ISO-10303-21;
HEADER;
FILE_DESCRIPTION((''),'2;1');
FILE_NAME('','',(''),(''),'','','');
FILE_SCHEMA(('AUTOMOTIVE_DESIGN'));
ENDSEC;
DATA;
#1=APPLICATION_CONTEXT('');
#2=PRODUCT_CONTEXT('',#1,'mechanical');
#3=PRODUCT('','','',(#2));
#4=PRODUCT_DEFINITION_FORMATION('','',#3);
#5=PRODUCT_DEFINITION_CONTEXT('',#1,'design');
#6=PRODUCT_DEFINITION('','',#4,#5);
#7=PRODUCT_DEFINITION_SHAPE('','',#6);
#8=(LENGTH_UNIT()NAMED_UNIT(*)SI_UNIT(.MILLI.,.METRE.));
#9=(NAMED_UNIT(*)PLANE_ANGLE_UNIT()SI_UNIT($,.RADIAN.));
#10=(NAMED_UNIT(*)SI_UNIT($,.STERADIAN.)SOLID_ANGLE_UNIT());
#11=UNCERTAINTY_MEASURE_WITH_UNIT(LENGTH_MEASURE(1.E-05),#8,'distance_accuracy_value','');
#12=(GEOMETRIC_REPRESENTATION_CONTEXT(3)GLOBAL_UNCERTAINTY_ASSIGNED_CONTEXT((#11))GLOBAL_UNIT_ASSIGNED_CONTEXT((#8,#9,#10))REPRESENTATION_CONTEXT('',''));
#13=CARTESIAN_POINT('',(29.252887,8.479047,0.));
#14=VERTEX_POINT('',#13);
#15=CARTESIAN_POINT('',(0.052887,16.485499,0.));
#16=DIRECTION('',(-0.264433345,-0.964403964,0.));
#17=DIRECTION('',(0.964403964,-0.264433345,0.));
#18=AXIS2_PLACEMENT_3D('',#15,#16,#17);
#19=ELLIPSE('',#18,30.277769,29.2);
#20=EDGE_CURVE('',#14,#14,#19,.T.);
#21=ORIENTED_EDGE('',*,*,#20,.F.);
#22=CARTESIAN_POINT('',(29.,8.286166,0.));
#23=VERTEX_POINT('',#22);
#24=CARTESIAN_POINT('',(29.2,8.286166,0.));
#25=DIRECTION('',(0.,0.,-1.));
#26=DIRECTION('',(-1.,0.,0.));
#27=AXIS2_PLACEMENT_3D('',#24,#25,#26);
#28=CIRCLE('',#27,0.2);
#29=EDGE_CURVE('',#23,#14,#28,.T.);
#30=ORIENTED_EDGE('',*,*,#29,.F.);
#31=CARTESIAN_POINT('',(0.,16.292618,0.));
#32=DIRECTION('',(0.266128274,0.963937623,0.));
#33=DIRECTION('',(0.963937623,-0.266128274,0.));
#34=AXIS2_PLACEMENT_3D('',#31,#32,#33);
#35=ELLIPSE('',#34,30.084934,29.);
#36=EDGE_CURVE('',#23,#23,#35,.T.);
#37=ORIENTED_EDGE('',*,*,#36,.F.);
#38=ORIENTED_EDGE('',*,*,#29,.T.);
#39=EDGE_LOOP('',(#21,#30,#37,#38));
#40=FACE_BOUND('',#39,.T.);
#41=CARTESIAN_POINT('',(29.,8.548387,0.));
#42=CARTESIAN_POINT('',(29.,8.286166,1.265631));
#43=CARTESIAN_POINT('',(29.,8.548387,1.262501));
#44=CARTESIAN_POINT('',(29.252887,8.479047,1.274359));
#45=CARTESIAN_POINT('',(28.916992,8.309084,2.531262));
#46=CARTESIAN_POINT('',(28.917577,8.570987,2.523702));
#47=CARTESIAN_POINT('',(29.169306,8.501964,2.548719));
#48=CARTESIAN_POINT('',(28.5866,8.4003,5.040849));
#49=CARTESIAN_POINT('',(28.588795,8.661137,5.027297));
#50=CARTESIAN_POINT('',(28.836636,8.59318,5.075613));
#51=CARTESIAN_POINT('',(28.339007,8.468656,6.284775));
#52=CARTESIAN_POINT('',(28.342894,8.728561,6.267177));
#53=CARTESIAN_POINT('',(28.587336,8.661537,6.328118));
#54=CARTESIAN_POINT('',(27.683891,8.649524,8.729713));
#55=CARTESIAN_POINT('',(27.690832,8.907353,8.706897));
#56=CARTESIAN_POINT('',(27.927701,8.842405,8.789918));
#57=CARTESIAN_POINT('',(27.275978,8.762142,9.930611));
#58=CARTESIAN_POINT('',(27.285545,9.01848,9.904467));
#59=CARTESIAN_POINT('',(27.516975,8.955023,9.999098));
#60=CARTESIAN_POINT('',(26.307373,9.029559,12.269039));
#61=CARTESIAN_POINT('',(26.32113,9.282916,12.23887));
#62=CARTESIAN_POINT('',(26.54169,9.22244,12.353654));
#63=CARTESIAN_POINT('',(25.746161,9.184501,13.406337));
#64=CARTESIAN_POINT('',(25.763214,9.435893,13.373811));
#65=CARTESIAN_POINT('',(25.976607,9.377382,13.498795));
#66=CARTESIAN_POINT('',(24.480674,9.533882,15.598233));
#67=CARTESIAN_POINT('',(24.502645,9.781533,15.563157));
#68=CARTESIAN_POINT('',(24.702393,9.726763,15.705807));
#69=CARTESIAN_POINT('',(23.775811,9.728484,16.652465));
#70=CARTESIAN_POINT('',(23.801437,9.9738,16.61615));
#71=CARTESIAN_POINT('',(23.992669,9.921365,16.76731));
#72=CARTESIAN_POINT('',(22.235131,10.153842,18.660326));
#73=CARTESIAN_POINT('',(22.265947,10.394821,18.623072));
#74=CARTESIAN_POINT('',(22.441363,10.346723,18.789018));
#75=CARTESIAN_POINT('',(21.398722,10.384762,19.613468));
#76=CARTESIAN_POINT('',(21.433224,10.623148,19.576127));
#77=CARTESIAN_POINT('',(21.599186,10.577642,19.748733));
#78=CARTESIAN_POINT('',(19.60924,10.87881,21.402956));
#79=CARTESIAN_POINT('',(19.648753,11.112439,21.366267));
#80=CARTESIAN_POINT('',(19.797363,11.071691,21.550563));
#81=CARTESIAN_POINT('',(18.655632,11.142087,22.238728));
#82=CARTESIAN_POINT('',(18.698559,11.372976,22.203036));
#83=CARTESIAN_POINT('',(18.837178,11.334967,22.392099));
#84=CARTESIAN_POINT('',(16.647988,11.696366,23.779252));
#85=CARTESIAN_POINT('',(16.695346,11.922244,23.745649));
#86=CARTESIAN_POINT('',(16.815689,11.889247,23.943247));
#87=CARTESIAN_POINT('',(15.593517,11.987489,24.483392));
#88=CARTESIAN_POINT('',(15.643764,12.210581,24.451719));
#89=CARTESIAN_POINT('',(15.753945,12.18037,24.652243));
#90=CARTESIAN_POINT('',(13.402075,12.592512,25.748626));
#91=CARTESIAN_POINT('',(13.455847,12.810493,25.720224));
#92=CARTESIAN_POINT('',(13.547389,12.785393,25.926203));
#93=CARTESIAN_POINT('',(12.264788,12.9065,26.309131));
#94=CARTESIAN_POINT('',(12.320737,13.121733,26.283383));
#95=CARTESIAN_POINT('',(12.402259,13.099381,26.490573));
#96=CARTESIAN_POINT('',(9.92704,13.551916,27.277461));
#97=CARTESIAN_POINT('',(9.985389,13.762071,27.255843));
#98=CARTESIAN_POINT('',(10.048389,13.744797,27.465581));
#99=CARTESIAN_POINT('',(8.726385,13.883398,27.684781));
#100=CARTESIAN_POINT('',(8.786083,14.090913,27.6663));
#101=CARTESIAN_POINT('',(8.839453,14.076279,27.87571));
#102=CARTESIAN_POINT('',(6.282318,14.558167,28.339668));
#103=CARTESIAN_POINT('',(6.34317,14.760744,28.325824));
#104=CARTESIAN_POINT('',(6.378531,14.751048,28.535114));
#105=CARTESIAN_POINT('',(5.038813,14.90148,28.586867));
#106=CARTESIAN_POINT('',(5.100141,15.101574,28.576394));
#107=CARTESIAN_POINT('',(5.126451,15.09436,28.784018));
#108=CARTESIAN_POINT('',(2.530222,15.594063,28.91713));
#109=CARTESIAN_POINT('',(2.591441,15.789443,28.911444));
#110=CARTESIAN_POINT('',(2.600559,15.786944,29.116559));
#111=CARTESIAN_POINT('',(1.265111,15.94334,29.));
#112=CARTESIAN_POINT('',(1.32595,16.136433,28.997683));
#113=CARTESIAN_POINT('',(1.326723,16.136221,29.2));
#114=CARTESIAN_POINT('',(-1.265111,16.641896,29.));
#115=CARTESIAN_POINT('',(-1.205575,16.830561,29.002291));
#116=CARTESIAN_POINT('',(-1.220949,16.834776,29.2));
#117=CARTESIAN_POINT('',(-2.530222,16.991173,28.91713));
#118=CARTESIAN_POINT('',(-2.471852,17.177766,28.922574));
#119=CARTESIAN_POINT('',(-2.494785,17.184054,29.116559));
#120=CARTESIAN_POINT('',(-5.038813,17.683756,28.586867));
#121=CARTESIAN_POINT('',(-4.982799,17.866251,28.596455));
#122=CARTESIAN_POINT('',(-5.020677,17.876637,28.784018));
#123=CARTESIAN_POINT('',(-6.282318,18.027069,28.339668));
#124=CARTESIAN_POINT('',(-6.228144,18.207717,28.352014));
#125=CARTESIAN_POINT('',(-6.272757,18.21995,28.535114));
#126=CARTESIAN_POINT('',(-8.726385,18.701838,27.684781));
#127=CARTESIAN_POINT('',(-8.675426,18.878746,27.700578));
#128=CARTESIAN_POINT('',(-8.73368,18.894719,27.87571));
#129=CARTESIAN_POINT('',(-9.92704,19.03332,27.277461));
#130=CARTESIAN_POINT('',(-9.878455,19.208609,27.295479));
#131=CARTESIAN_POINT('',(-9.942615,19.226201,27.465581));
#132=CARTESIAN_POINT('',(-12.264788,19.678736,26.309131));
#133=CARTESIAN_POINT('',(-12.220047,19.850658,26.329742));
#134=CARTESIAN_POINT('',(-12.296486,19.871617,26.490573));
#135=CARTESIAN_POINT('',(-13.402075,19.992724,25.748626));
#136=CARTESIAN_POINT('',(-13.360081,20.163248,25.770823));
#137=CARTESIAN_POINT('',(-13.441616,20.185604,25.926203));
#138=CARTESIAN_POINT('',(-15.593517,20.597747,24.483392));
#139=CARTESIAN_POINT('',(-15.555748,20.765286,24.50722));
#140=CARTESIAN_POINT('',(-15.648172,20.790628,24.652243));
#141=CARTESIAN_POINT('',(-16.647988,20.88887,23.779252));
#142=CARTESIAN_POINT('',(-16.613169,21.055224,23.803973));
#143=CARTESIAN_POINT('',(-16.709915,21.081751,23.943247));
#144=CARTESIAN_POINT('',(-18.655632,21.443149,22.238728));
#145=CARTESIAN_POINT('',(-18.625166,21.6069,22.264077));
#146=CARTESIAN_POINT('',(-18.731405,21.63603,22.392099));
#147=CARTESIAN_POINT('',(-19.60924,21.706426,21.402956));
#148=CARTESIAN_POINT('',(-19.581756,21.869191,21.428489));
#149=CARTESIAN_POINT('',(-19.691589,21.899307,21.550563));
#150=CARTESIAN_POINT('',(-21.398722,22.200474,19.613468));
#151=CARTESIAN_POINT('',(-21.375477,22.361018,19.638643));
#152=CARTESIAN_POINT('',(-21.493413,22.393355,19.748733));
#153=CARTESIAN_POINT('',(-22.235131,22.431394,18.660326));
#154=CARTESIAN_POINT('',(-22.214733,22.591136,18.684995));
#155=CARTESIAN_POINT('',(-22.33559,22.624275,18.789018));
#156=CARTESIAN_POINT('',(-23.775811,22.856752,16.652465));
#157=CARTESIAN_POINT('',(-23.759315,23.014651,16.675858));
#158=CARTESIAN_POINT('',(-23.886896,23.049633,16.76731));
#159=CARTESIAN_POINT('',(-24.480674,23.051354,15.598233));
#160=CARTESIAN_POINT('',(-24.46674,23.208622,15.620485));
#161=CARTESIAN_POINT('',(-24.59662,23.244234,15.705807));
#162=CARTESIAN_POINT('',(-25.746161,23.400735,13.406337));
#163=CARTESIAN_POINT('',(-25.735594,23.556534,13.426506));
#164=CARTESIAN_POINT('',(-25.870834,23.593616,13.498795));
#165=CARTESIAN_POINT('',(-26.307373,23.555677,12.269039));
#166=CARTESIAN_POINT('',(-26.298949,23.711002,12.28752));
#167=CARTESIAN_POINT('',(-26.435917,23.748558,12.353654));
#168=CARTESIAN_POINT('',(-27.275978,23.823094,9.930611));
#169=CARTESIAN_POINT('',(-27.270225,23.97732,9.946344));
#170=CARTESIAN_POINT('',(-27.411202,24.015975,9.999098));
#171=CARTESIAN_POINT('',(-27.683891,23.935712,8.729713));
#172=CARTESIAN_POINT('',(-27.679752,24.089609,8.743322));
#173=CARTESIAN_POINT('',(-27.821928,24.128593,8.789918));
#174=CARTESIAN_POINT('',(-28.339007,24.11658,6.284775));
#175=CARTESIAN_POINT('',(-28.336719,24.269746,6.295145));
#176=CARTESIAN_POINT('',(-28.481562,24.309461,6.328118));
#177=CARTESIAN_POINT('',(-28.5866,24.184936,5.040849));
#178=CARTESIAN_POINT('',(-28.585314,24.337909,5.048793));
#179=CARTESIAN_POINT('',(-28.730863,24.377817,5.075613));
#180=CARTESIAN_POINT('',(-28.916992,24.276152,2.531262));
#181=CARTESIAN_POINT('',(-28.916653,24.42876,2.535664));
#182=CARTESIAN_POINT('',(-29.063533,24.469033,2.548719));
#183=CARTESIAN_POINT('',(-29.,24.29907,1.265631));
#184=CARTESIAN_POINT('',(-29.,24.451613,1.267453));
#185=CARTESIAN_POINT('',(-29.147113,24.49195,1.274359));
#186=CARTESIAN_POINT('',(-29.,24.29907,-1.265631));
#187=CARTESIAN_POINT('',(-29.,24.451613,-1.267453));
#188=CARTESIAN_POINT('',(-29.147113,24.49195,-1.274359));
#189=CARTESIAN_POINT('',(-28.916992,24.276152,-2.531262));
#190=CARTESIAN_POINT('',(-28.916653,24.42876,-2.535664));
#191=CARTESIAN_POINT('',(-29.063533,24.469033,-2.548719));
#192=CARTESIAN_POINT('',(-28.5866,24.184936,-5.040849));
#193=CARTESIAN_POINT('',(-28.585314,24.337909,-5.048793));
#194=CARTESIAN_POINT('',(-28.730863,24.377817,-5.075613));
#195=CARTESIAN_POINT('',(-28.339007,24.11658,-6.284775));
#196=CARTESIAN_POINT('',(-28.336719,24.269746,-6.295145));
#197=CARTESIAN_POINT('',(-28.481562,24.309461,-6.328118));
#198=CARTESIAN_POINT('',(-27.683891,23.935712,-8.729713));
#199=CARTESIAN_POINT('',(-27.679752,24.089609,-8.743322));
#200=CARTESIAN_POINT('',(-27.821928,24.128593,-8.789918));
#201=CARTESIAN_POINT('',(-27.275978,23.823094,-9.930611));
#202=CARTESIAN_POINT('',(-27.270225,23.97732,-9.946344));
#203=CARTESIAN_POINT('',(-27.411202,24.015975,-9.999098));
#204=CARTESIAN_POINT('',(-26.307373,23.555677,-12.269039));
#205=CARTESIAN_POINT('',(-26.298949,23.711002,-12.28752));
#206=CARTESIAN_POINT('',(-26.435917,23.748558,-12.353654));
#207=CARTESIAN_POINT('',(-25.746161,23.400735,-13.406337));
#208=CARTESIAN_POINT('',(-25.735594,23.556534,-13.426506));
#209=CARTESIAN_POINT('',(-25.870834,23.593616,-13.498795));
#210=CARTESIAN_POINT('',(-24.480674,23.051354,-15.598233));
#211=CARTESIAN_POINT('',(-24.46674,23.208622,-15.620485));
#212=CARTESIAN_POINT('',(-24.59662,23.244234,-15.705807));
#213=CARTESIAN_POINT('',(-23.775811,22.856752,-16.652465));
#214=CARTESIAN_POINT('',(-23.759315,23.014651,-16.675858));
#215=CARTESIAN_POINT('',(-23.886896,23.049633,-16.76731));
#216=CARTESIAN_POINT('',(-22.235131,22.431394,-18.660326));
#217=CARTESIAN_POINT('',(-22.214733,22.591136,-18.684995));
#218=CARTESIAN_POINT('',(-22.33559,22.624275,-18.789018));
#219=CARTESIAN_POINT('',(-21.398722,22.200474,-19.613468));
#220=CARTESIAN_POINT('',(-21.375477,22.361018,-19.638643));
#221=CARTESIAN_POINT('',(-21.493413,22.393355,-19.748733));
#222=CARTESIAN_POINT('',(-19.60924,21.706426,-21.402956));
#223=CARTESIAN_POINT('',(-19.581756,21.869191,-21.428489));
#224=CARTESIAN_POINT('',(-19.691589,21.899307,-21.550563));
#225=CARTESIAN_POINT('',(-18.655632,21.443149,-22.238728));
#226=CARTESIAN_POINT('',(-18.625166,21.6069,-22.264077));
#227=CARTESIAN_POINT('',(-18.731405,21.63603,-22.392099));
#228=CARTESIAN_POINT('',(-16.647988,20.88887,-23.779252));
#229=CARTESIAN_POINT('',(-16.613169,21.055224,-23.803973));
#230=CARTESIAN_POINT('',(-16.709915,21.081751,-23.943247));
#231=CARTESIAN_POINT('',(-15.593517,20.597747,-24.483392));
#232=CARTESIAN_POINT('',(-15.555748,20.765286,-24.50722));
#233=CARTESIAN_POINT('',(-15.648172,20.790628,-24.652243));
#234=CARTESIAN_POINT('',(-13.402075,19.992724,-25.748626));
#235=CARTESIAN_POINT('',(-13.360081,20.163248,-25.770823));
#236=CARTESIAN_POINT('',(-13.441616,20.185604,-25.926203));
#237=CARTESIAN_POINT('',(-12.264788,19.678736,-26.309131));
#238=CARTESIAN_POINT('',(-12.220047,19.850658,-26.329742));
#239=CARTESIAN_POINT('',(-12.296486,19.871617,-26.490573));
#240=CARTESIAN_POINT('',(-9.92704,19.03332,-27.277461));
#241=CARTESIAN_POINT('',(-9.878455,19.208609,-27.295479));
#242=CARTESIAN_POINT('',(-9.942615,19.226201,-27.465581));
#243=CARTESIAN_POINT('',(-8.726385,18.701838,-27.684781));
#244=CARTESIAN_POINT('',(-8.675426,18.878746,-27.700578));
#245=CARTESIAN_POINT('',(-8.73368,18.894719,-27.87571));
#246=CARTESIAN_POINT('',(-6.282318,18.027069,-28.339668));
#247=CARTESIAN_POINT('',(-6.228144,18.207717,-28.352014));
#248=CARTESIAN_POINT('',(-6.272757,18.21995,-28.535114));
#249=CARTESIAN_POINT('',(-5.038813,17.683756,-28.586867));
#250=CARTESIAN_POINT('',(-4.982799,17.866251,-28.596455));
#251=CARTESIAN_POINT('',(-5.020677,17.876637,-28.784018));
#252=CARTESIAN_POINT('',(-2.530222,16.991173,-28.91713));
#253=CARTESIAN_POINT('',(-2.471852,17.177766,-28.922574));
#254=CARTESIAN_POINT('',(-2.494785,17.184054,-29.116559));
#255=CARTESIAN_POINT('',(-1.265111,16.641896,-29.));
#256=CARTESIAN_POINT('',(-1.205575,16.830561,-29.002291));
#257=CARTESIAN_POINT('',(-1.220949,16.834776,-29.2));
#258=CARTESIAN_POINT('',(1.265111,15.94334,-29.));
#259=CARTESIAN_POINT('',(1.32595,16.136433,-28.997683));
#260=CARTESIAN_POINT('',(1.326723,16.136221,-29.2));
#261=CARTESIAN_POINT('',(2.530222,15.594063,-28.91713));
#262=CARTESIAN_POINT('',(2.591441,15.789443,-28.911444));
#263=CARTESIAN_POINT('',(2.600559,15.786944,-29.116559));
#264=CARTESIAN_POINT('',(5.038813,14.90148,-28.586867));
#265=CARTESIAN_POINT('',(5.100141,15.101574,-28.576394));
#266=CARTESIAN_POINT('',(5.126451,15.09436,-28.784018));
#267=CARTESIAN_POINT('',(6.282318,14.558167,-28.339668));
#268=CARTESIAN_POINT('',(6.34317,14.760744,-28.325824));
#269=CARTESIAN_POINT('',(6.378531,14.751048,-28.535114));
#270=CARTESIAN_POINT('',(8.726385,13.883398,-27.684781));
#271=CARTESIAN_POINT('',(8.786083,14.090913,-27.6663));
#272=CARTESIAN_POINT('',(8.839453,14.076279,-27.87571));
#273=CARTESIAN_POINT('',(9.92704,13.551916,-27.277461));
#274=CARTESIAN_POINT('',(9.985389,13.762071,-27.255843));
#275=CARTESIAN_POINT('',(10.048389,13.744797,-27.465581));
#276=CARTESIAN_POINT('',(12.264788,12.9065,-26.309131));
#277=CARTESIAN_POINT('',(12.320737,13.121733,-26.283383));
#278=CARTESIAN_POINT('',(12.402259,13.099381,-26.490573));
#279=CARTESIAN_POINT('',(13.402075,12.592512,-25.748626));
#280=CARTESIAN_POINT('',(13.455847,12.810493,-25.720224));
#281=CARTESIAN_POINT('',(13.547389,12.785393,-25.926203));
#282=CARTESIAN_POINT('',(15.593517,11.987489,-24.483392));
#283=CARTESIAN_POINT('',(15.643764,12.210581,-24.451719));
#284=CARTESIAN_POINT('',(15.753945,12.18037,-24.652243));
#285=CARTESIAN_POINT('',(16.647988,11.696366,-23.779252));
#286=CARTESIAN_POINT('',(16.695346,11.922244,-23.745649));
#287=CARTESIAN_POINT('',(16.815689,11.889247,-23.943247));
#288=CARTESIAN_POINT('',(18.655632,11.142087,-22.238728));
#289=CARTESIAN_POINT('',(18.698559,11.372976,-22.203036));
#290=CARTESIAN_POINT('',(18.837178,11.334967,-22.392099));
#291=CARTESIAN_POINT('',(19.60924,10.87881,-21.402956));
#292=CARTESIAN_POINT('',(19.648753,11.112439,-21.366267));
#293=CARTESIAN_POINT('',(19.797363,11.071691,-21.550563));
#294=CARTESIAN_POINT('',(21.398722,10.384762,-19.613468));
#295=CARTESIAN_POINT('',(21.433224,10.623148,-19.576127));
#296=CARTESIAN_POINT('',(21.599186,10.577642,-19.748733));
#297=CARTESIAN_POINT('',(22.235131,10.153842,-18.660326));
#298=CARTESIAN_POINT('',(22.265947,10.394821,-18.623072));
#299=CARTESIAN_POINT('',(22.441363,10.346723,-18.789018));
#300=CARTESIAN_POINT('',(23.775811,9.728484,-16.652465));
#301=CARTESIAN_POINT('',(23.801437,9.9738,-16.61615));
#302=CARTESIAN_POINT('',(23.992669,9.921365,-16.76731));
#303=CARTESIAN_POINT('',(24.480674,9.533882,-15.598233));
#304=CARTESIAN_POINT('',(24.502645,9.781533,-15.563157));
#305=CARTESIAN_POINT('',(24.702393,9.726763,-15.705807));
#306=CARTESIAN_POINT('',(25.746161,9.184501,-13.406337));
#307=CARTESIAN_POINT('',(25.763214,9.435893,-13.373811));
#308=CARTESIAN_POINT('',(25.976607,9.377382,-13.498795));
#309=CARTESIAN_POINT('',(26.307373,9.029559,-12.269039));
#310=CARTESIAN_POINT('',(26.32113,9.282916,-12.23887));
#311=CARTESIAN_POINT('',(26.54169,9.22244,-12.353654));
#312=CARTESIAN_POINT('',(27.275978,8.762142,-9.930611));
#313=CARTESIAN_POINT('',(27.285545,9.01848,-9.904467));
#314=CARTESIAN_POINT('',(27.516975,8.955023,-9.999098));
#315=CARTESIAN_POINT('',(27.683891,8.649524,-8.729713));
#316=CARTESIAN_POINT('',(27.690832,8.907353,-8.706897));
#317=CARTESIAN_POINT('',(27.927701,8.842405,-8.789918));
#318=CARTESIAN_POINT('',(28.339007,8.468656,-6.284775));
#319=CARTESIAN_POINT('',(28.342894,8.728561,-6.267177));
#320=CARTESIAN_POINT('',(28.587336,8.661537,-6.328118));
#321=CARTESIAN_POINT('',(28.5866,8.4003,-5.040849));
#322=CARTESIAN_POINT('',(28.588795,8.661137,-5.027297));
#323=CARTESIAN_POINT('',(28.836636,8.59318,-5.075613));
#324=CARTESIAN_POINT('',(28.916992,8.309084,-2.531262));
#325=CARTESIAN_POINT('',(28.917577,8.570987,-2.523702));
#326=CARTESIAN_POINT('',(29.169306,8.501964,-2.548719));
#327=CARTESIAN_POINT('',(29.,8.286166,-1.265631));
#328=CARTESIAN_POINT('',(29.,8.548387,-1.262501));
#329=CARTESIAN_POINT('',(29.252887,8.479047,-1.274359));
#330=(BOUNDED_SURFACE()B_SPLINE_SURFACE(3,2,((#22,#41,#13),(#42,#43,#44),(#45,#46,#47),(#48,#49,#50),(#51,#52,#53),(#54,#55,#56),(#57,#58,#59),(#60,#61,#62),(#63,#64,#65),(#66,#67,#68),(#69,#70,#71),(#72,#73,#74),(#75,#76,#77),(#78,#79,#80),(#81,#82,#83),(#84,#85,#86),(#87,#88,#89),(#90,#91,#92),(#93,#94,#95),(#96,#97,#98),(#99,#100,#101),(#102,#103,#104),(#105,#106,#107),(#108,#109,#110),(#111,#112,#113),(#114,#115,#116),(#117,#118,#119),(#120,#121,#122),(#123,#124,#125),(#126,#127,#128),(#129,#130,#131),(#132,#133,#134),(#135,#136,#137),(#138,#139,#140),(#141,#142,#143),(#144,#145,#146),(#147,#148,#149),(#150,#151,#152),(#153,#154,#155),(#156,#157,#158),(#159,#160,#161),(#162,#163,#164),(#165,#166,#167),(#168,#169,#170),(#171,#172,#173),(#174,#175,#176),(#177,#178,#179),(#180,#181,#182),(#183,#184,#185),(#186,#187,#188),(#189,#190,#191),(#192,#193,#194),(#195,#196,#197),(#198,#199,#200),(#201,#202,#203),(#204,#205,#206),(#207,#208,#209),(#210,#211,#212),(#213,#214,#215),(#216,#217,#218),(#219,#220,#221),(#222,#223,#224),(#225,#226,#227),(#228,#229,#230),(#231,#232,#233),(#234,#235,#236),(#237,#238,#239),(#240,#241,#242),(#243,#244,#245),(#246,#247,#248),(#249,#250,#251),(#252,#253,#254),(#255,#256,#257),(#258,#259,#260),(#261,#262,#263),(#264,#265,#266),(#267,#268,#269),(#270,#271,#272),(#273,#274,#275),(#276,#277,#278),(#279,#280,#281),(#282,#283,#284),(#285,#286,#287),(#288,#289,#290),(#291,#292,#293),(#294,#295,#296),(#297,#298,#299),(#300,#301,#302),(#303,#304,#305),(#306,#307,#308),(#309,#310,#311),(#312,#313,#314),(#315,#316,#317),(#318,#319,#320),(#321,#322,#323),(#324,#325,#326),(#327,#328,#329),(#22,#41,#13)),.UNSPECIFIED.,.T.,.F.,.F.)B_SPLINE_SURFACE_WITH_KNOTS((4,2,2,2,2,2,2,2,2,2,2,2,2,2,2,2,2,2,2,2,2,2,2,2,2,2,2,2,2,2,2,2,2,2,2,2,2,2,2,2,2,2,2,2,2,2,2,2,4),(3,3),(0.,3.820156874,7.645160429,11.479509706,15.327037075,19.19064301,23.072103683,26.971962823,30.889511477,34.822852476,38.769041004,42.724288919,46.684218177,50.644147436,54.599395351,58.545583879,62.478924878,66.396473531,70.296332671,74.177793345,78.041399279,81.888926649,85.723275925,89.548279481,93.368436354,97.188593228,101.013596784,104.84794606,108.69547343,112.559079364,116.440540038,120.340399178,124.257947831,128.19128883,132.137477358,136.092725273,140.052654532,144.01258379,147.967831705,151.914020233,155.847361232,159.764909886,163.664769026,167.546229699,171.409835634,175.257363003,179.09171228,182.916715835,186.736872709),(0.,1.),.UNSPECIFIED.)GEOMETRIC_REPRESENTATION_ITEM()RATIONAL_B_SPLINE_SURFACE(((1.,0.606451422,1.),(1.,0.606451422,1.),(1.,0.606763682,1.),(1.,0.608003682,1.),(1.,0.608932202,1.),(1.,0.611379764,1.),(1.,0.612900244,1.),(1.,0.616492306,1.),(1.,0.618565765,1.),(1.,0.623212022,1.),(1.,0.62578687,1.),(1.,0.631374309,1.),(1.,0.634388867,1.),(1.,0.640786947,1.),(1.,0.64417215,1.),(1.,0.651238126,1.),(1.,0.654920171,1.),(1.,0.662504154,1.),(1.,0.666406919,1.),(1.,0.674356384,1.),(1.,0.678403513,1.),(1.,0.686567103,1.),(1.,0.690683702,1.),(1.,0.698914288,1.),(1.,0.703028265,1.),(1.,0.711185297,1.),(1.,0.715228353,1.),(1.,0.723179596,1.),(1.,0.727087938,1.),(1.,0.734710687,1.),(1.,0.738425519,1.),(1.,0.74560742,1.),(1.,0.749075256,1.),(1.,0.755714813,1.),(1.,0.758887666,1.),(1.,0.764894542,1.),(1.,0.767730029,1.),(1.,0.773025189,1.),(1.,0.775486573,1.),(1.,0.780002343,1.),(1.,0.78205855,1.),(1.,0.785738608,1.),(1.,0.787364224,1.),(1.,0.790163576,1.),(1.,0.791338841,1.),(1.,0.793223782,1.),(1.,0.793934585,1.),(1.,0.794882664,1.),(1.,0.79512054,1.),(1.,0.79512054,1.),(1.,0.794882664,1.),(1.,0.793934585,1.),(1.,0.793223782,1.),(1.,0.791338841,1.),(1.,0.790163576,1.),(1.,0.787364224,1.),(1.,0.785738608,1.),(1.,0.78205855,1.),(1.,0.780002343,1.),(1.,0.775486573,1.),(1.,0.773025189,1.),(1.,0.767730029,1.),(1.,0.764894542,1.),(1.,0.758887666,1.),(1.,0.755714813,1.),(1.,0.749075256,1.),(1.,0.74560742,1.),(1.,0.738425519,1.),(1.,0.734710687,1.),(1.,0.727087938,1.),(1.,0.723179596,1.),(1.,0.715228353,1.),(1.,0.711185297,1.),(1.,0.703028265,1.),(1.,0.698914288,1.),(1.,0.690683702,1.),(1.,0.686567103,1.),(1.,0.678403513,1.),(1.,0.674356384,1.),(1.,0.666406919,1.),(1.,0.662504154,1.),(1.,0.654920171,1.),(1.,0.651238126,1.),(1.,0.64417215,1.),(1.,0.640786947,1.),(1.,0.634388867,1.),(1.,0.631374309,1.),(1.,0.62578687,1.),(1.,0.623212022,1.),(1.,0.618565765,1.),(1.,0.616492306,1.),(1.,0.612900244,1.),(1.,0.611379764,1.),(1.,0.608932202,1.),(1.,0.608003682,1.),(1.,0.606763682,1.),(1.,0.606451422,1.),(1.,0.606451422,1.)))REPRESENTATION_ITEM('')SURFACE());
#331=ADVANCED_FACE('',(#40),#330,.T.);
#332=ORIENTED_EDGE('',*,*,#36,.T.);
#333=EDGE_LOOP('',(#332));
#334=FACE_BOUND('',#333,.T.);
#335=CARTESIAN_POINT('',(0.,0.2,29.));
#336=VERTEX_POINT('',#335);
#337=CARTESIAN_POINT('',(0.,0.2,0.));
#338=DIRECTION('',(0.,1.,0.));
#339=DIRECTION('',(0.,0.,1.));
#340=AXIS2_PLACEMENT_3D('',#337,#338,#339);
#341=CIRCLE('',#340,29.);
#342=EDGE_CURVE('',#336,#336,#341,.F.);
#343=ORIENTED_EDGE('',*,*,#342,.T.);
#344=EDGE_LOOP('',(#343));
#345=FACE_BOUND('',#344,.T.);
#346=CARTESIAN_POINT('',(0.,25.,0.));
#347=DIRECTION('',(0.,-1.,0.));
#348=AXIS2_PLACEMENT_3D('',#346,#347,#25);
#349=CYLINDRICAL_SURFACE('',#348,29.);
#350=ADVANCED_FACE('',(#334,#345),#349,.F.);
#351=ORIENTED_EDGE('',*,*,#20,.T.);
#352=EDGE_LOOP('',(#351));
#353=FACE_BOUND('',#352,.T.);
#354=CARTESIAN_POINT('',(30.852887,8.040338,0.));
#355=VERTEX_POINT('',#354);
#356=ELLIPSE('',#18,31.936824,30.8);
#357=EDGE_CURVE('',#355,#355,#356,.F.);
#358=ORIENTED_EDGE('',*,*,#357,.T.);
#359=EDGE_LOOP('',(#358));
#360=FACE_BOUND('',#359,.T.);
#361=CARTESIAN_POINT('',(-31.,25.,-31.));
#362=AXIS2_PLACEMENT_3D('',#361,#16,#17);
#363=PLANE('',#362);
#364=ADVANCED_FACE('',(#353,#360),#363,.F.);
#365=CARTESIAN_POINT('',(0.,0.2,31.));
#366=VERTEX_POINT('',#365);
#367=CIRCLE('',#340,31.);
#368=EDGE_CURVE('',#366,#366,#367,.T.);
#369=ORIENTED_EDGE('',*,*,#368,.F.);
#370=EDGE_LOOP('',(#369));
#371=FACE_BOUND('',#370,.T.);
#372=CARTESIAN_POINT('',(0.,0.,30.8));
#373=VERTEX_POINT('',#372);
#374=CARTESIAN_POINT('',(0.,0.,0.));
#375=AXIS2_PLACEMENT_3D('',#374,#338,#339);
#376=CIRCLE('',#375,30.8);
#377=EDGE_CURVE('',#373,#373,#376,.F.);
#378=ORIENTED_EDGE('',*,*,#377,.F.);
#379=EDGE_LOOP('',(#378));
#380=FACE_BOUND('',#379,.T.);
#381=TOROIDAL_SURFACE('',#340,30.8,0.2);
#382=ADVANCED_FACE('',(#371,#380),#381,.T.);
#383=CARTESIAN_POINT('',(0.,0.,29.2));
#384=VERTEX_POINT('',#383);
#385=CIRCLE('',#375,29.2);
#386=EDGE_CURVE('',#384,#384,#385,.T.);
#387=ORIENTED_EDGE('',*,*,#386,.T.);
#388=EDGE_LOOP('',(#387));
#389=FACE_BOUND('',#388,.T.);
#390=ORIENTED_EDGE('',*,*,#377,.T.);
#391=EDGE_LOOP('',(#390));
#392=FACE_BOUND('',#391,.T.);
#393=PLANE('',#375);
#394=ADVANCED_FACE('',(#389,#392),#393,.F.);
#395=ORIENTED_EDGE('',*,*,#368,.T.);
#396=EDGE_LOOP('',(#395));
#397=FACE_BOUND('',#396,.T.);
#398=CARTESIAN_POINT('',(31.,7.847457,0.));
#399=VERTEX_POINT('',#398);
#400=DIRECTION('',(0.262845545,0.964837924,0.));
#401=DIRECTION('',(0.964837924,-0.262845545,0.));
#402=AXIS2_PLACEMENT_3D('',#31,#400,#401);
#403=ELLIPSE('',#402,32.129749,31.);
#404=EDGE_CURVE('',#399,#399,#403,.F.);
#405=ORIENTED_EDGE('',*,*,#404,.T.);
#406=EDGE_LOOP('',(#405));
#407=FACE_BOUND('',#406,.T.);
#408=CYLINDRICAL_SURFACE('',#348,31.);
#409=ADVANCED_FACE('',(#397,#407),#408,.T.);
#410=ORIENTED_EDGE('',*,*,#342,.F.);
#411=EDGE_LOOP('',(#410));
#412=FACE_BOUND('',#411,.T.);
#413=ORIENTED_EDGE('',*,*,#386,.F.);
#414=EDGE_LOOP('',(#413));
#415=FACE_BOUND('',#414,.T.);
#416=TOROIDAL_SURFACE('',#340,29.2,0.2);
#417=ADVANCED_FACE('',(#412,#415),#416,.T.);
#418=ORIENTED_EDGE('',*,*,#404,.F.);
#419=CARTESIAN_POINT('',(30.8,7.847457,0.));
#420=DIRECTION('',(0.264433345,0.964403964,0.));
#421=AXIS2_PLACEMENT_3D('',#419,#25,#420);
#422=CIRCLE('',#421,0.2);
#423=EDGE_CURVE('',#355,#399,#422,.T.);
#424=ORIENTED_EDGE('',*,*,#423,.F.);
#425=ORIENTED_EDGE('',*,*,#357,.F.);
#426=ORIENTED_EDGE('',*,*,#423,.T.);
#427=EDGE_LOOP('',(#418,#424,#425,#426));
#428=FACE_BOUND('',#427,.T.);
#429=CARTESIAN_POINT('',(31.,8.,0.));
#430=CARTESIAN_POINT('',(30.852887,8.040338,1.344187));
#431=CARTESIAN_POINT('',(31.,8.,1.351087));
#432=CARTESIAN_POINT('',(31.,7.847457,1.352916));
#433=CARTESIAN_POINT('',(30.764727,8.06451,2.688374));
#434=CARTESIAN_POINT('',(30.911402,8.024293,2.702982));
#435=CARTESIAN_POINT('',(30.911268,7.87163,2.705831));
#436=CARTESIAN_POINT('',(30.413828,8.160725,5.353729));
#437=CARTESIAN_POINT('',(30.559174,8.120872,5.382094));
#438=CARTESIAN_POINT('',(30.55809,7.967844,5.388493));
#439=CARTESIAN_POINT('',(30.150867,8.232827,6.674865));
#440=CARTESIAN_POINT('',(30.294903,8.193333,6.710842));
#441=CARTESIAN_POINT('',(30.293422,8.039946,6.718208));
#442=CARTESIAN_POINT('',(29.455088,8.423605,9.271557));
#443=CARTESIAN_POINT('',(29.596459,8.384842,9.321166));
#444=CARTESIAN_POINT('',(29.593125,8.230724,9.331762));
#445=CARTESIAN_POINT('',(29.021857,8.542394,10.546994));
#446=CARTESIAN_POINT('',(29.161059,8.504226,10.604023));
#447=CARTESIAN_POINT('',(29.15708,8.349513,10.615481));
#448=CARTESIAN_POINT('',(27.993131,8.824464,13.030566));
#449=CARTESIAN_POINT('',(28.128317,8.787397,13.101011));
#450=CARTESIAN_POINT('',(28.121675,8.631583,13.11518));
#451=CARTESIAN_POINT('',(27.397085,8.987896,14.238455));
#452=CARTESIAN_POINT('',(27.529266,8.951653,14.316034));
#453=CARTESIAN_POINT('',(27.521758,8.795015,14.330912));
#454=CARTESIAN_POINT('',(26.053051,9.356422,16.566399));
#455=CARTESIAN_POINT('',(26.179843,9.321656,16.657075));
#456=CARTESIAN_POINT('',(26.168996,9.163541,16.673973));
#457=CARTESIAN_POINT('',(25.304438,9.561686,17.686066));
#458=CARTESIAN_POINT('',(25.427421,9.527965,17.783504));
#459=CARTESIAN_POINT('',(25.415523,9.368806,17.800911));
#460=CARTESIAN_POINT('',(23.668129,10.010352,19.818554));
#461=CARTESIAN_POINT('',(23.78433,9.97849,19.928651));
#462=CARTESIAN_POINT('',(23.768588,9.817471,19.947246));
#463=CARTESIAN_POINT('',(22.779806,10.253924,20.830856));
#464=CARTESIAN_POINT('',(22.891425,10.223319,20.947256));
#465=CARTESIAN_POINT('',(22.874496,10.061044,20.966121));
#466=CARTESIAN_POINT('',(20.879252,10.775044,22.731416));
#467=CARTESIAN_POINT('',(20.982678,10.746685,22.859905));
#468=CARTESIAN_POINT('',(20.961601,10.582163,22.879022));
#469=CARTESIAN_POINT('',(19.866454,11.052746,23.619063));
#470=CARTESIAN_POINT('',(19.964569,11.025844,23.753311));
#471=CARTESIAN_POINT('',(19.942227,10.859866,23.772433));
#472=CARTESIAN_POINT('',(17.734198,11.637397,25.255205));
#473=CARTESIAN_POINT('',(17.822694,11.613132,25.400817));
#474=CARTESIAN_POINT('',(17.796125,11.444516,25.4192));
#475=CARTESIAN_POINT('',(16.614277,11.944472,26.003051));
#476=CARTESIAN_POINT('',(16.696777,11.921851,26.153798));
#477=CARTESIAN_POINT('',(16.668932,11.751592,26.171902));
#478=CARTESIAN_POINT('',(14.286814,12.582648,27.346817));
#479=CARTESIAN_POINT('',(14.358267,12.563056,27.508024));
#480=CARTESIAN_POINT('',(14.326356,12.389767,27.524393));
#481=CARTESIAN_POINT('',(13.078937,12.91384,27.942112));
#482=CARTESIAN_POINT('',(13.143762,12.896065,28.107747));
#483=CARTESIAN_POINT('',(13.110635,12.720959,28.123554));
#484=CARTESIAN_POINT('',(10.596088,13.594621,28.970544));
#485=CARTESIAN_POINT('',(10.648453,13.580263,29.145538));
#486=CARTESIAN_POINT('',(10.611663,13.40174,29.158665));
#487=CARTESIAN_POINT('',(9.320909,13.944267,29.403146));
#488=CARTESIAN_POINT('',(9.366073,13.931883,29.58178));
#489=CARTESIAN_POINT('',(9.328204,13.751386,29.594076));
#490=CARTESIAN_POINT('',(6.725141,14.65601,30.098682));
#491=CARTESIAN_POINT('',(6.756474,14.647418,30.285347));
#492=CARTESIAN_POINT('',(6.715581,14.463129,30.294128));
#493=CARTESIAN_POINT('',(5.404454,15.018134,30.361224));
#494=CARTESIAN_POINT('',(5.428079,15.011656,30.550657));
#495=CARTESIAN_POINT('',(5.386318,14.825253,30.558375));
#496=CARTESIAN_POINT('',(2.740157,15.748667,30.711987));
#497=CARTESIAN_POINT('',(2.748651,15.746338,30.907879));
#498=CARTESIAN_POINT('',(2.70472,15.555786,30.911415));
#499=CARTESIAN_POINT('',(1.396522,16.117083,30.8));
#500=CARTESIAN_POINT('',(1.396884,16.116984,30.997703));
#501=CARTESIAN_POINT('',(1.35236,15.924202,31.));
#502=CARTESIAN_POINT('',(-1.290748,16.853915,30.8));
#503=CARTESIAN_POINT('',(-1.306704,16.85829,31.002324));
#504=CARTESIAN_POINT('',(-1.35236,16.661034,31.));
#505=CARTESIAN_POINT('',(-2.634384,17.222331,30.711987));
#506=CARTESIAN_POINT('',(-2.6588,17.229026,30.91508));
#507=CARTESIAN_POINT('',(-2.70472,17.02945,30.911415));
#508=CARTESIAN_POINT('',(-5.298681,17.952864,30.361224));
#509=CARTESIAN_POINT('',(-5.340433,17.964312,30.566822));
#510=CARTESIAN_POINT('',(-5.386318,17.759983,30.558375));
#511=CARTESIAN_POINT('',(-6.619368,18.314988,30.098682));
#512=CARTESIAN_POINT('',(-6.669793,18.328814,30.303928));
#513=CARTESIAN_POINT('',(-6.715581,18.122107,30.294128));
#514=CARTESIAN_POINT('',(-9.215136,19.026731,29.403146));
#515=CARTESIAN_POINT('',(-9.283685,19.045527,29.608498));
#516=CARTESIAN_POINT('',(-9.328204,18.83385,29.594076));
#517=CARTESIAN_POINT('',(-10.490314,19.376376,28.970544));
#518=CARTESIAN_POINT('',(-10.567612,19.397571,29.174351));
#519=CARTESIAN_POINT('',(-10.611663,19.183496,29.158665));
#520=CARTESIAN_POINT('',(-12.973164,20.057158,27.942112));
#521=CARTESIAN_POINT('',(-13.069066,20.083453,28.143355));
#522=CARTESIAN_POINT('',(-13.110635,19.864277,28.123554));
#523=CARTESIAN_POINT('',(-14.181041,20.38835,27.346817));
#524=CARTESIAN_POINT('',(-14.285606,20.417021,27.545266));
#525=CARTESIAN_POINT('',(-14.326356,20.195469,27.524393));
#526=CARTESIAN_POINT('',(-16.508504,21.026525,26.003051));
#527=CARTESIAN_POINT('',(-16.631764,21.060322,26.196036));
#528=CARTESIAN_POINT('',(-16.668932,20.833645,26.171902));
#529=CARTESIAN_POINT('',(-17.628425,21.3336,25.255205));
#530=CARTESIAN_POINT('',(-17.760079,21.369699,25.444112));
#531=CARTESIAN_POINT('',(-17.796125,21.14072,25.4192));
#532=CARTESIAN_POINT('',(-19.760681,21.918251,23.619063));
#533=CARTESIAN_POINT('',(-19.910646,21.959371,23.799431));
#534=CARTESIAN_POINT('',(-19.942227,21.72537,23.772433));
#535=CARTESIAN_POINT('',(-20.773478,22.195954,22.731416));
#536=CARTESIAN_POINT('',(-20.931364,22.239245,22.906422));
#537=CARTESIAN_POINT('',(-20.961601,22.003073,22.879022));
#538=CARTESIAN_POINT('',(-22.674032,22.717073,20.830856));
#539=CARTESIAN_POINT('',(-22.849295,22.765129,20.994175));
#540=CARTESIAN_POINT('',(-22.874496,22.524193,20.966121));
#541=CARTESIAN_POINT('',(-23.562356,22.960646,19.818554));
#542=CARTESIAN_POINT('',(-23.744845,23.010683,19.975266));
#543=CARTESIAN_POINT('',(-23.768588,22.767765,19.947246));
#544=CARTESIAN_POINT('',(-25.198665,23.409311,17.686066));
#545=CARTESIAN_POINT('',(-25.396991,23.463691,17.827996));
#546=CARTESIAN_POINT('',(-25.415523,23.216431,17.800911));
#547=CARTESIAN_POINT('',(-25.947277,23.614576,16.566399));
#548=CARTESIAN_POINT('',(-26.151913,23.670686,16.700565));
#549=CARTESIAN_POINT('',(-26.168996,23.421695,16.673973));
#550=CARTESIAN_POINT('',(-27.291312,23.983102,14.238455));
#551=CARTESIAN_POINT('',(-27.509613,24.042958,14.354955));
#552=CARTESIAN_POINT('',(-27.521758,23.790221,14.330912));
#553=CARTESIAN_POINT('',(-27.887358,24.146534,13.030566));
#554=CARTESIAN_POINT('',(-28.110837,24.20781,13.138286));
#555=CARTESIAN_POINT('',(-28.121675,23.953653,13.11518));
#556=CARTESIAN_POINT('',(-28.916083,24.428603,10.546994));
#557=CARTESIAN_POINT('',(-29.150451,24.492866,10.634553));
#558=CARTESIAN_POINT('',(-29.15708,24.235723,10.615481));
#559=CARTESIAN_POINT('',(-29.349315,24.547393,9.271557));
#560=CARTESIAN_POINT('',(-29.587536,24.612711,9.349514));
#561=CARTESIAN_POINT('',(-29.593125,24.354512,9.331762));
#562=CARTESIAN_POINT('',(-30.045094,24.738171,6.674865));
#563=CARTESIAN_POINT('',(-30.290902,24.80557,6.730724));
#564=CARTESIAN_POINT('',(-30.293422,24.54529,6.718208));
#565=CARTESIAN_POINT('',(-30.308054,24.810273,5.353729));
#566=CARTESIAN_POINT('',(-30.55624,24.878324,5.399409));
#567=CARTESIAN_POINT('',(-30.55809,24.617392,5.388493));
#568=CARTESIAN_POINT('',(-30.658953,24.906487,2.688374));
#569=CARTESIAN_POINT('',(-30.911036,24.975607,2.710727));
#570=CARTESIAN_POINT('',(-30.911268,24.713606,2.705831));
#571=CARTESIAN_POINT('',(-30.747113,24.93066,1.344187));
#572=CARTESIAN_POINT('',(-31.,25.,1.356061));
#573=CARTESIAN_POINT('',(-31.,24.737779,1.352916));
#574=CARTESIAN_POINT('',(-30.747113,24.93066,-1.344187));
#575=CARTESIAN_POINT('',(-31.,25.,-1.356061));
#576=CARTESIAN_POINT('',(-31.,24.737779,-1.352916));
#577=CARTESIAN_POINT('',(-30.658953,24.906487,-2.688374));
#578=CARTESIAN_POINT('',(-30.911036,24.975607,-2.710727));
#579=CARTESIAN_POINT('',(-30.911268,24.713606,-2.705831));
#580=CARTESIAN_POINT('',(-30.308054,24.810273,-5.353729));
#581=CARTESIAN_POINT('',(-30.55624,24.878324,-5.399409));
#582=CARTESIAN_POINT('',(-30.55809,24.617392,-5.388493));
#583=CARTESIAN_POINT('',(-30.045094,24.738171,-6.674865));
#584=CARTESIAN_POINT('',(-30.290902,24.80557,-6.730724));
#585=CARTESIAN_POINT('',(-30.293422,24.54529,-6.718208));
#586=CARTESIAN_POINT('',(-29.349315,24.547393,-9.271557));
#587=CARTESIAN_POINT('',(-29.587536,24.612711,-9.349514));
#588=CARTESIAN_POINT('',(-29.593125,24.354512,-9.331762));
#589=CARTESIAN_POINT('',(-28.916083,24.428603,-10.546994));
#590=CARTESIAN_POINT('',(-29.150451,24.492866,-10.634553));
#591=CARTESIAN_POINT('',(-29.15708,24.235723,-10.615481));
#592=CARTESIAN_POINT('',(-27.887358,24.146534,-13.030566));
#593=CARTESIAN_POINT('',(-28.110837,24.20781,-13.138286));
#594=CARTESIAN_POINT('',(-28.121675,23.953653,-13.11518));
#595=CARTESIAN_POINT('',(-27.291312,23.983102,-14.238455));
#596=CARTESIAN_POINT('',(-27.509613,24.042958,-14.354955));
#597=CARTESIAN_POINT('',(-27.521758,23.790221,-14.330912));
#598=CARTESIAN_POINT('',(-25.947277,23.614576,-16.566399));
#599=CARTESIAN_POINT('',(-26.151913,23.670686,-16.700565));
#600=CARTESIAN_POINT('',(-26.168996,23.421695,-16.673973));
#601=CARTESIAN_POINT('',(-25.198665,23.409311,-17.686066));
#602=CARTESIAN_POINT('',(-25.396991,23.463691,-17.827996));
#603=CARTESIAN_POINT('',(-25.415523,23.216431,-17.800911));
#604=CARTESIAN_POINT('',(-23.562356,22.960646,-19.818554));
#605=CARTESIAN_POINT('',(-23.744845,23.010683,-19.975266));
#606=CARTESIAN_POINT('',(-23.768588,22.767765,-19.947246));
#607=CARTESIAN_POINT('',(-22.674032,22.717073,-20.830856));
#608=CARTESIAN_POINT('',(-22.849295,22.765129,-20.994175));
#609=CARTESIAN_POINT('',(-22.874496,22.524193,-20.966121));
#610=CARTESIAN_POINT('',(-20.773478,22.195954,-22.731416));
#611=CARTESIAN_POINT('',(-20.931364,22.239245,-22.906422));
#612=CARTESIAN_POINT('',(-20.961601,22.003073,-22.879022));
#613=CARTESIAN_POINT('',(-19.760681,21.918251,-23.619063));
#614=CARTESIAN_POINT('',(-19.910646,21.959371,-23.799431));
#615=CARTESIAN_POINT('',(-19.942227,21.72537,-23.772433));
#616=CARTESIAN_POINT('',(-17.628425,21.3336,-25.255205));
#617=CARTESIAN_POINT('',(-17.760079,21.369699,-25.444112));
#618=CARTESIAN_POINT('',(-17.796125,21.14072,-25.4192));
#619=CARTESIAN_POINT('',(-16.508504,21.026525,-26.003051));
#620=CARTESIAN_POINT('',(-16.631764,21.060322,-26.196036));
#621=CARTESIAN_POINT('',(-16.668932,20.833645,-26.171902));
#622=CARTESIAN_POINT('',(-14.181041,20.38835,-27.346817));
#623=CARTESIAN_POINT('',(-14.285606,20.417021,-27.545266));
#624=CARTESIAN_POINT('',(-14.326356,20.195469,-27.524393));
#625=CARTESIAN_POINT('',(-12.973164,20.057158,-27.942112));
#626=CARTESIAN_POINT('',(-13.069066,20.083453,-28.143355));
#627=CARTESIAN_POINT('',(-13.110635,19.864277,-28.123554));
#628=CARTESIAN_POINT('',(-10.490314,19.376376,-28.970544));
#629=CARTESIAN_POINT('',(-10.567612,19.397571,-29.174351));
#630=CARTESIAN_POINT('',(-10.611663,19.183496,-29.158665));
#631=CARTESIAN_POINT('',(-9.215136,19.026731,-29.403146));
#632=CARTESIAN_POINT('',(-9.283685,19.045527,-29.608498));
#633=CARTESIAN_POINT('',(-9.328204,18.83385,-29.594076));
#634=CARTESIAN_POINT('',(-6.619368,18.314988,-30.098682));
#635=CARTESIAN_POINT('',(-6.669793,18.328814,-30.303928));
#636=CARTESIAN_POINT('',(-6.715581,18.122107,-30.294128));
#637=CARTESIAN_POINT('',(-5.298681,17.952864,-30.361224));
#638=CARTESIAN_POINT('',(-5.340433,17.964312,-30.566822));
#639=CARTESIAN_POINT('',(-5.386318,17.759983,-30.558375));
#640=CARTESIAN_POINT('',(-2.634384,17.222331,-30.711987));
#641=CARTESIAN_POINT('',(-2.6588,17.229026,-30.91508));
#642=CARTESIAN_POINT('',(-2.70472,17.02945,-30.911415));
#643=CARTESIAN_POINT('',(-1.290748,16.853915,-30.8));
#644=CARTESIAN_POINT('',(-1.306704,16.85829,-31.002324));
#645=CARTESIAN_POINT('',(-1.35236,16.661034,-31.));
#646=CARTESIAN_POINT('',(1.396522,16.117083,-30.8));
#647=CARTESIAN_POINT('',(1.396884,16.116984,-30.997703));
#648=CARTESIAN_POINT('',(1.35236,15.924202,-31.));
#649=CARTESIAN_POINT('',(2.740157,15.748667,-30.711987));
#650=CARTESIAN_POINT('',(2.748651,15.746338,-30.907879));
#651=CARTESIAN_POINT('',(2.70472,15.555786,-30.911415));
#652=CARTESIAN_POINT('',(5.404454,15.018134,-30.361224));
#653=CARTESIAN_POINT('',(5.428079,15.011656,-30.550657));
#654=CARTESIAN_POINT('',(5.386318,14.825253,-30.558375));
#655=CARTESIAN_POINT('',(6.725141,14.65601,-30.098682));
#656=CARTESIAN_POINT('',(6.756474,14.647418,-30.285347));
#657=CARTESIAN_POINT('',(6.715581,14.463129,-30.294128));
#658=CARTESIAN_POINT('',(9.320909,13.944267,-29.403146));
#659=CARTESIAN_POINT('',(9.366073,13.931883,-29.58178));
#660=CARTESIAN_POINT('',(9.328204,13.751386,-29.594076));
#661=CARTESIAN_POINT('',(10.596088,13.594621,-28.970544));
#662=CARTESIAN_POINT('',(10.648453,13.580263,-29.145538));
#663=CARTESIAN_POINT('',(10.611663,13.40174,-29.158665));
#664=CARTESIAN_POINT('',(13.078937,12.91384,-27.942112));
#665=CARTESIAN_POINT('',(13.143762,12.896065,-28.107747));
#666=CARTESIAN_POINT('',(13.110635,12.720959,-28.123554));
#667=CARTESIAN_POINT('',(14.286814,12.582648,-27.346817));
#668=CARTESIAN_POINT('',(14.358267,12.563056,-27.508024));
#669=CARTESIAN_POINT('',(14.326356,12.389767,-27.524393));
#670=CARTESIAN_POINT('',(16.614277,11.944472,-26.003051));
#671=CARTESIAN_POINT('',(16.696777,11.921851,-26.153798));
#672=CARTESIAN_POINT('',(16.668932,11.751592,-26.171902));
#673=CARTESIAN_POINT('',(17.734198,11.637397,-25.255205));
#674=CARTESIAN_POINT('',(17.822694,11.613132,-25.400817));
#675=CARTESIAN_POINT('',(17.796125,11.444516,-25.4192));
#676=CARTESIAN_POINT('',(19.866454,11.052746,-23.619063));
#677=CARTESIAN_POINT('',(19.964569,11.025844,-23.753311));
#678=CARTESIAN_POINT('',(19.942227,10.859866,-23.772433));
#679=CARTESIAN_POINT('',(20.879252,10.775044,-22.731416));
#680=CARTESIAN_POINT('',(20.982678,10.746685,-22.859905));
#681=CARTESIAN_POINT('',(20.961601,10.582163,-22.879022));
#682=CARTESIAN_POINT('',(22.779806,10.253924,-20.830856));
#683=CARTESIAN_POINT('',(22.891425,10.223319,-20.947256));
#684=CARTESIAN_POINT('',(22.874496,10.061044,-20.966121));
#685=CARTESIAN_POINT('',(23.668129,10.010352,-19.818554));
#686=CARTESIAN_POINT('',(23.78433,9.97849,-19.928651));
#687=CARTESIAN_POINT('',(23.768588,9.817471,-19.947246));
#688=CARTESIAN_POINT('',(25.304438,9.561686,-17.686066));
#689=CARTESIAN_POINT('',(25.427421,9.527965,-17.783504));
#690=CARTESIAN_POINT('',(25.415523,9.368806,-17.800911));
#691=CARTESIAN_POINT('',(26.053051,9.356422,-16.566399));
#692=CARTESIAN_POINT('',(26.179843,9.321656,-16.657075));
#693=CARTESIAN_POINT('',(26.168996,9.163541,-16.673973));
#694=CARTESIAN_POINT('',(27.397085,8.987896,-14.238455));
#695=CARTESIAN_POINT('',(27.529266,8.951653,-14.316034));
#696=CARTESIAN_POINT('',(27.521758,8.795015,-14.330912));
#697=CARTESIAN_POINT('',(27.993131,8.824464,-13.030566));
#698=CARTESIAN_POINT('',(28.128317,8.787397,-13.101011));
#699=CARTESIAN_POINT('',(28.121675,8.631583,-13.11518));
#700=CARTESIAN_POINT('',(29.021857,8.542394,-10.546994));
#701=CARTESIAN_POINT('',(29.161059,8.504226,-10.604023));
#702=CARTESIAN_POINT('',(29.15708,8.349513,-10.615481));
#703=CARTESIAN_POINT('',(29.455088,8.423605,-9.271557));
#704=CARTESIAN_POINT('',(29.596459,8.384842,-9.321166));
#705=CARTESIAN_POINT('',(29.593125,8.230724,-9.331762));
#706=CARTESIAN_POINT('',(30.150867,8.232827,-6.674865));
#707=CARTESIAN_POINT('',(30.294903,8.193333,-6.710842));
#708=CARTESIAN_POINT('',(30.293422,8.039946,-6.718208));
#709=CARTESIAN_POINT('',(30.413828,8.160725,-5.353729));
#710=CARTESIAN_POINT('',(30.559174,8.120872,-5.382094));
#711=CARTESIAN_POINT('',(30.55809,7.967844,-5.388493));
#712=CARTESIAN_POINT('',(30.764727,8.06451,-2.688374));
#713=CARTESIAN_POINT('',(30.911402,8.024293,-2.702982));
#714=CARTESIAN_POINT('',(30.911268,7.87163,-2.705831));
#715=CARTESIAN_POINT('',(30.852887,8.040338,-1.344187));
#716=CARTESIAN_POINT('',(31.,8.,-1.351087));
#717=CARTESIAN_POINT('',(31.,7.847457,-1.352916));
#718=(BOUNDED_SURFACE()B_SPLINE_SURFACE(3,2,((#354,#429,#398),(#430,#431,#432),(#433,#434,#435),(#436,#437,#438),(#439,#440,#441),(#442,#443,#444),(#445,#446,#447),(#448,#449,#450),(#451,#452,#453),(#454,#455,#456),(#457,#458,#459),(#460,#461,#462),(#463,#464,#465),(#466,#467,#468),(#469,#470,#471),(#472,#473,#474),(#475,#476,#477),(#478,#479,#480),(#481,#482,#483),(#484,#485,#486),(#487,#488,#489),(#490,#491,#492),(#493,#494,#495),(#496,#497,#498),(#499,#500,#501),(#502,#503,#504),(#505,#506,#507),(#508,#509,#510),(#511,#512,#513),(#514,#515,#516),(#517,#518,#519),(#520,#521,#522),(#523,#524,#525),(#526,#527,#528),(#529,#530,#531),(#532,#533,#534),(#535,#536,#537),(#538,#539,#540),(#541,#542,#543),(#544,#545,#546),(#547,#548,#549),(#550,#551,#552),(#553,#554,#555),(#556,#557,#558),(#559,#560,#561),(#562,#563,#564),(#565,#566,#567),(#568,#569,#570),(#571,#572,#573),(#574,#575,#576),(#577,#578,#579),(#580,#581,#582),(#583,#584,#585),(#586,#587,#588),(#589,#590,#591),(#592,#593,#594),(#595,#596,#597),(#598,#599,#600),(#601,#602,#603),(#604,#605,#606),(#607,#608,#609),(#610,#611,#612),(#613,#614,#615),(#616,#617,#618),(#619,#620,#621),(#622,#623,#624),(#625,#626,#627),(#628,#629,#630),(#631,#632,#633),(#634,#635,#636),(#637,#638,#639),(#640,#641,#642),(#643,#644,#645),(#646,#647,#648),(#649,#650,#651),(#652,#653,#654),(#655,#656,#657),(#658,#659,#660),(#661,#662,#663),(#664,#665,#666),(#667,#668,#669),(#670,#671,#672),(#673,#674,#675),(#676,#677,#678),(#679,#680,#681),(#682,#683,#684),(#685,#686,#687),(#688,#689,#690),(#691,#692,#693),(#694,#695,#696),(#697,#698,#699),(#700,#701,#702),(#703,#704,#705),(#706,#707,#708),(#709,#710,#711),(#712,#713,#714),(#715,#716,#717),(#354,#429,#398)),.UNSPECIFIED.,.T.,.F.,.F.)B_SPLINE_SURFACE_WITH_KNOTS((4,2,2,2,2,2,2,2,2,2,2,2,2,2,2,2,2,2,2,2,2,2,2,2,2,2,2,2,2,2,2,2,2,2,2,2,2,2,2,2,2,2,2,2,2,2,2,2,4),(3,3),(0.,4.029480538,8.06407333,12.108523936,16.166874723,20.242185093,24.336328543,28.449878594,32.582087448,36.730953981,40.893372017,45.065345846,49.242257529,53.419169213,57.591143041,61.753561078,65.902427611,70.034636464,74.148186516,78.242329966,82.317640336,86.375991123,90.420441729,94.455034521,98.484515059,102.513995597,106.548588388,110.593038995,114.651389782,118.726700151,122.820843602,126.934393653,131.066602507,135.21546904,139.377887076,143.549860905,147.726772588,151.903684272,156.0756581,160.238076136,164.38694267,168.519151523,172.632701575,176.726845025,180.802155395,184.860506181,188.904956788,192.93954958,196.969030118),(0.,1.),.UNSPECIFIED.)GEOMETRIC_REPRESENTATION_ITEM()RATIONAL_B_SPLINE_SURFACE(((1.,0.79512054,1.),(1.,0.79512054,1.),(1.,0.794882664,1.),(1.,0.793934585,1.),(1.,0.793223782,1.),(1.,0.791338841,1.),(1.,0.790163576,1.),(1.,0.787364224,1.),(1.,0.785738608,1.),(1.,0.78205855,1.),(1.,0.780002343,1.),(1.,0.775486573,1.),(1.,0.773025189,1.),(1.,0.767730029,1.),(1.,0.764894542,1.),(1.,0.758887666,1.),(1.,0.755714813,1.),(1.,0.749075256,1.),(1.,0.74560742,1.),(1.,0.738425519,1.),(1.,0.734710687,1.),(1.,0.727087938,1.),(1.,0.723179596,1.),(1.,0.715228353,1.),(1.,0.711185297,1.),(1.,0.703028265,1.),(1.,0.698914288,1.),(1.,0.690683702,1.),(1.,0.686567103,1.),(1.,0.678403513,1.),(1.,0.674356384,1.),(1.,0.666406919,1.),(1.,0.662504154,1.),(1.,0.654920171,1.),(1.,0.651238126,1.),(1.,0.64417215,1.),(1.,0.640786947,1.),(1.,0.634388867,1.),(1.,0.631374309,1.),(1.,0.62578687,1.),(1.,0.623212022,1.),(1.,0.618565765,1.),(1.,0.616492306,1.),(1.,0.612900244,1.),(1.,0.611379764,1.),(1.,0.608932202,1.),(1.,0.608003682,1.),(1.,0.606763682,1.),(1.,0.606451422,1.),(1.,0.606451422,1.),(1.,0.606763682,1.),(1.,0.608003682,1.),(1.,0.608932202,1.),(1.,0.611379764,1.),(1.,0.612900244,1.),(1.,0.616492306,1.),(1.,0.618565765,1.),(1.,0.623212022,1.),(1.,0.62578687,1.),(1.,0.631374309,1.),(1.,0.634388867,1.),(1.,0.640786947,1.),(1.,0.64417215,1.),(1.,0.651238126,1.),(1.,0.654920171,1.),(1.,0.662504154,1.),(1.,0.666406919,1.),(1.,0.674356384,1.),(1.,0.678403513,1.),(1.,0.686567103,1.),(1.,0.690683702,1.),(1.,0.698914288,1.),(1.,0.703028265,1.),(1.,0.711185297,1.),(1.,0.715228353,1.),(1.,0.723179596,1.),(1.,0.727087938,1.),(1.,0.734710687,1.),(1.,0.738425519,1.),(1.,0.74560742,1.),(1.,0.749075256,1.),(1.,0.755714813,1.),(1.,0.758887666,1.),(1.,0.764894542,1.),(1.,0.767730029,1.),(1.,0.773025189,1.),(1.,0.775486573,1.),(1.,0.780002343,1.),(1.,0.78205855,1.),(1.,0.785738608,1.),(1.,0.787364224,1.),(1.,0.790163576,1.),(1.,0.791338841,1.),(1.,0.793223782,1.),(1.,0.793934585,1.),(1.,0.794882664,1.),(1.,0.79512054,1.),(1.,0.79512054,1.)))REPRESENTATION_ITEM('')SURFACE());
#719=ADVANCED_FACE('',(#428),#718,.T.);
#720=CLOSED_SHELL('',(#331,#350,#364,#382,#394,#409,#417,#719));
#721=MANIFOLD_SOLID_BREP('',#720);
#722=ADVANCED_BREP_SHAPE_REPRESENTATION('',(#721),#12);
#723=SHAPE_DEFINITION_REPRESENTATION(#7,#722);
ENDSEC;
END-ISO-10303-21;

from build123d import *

# Parameters (mm, degrees)
SKETCH1_R               = 31
SKETCH1_R_2             = 29
BOSS_EXTRUDE1_DEPTH     = 25
CUT_EXTRUDE1_DEPTH      = 51.467811524
CUT_EXTRUDE1_DEPTH_BACK = 51.467811524
FILLET1_R               = 0.2


with BuildPart() as part:
    # Sketch1 → Boss-Extrude1 (new body)
    with BuildSketch(Plane(origin=(0, 0, 0), x_dir=(1, 0, 0), z_dir=(0, 1, 0))):
        Circle(SKETCH1_R)
        Circle(SKETCH1_R_2, mode=Mode.SUBTRACT)
    extrude(amount=BOSS_EXTRUDE1_DEPTH)

    # Sketch2 → Cut-Extrude1 (cut, two sides: drawn at the far end of the back side and taken through both)
    with BuildSketch(Plane.XY.offset(-CUT_EXTRUDE1_DEPTH_BACK)):
        Polygon((-31, 25), (31, 8), (31, 25), align=None)
    extrude(amount=CUT_EXTRUDE1_DEPTH + CUT_EXTRUDE1_DEPTH_BACK, mode=Mode.SUBTRACT)

    # Fillet1
    fillet1_edges = [part.edges().sort_by_distance(p)[0] for p in [
        (2e-09, 16.5, 31),
        (-29, 24.451612903, 2.1945e-05),
        (-29, 0, 0),
        (-31, 0, 0),
    ]]
    fillet(fillet1_edges, radius=FILLET1_R)


solid = part.part
